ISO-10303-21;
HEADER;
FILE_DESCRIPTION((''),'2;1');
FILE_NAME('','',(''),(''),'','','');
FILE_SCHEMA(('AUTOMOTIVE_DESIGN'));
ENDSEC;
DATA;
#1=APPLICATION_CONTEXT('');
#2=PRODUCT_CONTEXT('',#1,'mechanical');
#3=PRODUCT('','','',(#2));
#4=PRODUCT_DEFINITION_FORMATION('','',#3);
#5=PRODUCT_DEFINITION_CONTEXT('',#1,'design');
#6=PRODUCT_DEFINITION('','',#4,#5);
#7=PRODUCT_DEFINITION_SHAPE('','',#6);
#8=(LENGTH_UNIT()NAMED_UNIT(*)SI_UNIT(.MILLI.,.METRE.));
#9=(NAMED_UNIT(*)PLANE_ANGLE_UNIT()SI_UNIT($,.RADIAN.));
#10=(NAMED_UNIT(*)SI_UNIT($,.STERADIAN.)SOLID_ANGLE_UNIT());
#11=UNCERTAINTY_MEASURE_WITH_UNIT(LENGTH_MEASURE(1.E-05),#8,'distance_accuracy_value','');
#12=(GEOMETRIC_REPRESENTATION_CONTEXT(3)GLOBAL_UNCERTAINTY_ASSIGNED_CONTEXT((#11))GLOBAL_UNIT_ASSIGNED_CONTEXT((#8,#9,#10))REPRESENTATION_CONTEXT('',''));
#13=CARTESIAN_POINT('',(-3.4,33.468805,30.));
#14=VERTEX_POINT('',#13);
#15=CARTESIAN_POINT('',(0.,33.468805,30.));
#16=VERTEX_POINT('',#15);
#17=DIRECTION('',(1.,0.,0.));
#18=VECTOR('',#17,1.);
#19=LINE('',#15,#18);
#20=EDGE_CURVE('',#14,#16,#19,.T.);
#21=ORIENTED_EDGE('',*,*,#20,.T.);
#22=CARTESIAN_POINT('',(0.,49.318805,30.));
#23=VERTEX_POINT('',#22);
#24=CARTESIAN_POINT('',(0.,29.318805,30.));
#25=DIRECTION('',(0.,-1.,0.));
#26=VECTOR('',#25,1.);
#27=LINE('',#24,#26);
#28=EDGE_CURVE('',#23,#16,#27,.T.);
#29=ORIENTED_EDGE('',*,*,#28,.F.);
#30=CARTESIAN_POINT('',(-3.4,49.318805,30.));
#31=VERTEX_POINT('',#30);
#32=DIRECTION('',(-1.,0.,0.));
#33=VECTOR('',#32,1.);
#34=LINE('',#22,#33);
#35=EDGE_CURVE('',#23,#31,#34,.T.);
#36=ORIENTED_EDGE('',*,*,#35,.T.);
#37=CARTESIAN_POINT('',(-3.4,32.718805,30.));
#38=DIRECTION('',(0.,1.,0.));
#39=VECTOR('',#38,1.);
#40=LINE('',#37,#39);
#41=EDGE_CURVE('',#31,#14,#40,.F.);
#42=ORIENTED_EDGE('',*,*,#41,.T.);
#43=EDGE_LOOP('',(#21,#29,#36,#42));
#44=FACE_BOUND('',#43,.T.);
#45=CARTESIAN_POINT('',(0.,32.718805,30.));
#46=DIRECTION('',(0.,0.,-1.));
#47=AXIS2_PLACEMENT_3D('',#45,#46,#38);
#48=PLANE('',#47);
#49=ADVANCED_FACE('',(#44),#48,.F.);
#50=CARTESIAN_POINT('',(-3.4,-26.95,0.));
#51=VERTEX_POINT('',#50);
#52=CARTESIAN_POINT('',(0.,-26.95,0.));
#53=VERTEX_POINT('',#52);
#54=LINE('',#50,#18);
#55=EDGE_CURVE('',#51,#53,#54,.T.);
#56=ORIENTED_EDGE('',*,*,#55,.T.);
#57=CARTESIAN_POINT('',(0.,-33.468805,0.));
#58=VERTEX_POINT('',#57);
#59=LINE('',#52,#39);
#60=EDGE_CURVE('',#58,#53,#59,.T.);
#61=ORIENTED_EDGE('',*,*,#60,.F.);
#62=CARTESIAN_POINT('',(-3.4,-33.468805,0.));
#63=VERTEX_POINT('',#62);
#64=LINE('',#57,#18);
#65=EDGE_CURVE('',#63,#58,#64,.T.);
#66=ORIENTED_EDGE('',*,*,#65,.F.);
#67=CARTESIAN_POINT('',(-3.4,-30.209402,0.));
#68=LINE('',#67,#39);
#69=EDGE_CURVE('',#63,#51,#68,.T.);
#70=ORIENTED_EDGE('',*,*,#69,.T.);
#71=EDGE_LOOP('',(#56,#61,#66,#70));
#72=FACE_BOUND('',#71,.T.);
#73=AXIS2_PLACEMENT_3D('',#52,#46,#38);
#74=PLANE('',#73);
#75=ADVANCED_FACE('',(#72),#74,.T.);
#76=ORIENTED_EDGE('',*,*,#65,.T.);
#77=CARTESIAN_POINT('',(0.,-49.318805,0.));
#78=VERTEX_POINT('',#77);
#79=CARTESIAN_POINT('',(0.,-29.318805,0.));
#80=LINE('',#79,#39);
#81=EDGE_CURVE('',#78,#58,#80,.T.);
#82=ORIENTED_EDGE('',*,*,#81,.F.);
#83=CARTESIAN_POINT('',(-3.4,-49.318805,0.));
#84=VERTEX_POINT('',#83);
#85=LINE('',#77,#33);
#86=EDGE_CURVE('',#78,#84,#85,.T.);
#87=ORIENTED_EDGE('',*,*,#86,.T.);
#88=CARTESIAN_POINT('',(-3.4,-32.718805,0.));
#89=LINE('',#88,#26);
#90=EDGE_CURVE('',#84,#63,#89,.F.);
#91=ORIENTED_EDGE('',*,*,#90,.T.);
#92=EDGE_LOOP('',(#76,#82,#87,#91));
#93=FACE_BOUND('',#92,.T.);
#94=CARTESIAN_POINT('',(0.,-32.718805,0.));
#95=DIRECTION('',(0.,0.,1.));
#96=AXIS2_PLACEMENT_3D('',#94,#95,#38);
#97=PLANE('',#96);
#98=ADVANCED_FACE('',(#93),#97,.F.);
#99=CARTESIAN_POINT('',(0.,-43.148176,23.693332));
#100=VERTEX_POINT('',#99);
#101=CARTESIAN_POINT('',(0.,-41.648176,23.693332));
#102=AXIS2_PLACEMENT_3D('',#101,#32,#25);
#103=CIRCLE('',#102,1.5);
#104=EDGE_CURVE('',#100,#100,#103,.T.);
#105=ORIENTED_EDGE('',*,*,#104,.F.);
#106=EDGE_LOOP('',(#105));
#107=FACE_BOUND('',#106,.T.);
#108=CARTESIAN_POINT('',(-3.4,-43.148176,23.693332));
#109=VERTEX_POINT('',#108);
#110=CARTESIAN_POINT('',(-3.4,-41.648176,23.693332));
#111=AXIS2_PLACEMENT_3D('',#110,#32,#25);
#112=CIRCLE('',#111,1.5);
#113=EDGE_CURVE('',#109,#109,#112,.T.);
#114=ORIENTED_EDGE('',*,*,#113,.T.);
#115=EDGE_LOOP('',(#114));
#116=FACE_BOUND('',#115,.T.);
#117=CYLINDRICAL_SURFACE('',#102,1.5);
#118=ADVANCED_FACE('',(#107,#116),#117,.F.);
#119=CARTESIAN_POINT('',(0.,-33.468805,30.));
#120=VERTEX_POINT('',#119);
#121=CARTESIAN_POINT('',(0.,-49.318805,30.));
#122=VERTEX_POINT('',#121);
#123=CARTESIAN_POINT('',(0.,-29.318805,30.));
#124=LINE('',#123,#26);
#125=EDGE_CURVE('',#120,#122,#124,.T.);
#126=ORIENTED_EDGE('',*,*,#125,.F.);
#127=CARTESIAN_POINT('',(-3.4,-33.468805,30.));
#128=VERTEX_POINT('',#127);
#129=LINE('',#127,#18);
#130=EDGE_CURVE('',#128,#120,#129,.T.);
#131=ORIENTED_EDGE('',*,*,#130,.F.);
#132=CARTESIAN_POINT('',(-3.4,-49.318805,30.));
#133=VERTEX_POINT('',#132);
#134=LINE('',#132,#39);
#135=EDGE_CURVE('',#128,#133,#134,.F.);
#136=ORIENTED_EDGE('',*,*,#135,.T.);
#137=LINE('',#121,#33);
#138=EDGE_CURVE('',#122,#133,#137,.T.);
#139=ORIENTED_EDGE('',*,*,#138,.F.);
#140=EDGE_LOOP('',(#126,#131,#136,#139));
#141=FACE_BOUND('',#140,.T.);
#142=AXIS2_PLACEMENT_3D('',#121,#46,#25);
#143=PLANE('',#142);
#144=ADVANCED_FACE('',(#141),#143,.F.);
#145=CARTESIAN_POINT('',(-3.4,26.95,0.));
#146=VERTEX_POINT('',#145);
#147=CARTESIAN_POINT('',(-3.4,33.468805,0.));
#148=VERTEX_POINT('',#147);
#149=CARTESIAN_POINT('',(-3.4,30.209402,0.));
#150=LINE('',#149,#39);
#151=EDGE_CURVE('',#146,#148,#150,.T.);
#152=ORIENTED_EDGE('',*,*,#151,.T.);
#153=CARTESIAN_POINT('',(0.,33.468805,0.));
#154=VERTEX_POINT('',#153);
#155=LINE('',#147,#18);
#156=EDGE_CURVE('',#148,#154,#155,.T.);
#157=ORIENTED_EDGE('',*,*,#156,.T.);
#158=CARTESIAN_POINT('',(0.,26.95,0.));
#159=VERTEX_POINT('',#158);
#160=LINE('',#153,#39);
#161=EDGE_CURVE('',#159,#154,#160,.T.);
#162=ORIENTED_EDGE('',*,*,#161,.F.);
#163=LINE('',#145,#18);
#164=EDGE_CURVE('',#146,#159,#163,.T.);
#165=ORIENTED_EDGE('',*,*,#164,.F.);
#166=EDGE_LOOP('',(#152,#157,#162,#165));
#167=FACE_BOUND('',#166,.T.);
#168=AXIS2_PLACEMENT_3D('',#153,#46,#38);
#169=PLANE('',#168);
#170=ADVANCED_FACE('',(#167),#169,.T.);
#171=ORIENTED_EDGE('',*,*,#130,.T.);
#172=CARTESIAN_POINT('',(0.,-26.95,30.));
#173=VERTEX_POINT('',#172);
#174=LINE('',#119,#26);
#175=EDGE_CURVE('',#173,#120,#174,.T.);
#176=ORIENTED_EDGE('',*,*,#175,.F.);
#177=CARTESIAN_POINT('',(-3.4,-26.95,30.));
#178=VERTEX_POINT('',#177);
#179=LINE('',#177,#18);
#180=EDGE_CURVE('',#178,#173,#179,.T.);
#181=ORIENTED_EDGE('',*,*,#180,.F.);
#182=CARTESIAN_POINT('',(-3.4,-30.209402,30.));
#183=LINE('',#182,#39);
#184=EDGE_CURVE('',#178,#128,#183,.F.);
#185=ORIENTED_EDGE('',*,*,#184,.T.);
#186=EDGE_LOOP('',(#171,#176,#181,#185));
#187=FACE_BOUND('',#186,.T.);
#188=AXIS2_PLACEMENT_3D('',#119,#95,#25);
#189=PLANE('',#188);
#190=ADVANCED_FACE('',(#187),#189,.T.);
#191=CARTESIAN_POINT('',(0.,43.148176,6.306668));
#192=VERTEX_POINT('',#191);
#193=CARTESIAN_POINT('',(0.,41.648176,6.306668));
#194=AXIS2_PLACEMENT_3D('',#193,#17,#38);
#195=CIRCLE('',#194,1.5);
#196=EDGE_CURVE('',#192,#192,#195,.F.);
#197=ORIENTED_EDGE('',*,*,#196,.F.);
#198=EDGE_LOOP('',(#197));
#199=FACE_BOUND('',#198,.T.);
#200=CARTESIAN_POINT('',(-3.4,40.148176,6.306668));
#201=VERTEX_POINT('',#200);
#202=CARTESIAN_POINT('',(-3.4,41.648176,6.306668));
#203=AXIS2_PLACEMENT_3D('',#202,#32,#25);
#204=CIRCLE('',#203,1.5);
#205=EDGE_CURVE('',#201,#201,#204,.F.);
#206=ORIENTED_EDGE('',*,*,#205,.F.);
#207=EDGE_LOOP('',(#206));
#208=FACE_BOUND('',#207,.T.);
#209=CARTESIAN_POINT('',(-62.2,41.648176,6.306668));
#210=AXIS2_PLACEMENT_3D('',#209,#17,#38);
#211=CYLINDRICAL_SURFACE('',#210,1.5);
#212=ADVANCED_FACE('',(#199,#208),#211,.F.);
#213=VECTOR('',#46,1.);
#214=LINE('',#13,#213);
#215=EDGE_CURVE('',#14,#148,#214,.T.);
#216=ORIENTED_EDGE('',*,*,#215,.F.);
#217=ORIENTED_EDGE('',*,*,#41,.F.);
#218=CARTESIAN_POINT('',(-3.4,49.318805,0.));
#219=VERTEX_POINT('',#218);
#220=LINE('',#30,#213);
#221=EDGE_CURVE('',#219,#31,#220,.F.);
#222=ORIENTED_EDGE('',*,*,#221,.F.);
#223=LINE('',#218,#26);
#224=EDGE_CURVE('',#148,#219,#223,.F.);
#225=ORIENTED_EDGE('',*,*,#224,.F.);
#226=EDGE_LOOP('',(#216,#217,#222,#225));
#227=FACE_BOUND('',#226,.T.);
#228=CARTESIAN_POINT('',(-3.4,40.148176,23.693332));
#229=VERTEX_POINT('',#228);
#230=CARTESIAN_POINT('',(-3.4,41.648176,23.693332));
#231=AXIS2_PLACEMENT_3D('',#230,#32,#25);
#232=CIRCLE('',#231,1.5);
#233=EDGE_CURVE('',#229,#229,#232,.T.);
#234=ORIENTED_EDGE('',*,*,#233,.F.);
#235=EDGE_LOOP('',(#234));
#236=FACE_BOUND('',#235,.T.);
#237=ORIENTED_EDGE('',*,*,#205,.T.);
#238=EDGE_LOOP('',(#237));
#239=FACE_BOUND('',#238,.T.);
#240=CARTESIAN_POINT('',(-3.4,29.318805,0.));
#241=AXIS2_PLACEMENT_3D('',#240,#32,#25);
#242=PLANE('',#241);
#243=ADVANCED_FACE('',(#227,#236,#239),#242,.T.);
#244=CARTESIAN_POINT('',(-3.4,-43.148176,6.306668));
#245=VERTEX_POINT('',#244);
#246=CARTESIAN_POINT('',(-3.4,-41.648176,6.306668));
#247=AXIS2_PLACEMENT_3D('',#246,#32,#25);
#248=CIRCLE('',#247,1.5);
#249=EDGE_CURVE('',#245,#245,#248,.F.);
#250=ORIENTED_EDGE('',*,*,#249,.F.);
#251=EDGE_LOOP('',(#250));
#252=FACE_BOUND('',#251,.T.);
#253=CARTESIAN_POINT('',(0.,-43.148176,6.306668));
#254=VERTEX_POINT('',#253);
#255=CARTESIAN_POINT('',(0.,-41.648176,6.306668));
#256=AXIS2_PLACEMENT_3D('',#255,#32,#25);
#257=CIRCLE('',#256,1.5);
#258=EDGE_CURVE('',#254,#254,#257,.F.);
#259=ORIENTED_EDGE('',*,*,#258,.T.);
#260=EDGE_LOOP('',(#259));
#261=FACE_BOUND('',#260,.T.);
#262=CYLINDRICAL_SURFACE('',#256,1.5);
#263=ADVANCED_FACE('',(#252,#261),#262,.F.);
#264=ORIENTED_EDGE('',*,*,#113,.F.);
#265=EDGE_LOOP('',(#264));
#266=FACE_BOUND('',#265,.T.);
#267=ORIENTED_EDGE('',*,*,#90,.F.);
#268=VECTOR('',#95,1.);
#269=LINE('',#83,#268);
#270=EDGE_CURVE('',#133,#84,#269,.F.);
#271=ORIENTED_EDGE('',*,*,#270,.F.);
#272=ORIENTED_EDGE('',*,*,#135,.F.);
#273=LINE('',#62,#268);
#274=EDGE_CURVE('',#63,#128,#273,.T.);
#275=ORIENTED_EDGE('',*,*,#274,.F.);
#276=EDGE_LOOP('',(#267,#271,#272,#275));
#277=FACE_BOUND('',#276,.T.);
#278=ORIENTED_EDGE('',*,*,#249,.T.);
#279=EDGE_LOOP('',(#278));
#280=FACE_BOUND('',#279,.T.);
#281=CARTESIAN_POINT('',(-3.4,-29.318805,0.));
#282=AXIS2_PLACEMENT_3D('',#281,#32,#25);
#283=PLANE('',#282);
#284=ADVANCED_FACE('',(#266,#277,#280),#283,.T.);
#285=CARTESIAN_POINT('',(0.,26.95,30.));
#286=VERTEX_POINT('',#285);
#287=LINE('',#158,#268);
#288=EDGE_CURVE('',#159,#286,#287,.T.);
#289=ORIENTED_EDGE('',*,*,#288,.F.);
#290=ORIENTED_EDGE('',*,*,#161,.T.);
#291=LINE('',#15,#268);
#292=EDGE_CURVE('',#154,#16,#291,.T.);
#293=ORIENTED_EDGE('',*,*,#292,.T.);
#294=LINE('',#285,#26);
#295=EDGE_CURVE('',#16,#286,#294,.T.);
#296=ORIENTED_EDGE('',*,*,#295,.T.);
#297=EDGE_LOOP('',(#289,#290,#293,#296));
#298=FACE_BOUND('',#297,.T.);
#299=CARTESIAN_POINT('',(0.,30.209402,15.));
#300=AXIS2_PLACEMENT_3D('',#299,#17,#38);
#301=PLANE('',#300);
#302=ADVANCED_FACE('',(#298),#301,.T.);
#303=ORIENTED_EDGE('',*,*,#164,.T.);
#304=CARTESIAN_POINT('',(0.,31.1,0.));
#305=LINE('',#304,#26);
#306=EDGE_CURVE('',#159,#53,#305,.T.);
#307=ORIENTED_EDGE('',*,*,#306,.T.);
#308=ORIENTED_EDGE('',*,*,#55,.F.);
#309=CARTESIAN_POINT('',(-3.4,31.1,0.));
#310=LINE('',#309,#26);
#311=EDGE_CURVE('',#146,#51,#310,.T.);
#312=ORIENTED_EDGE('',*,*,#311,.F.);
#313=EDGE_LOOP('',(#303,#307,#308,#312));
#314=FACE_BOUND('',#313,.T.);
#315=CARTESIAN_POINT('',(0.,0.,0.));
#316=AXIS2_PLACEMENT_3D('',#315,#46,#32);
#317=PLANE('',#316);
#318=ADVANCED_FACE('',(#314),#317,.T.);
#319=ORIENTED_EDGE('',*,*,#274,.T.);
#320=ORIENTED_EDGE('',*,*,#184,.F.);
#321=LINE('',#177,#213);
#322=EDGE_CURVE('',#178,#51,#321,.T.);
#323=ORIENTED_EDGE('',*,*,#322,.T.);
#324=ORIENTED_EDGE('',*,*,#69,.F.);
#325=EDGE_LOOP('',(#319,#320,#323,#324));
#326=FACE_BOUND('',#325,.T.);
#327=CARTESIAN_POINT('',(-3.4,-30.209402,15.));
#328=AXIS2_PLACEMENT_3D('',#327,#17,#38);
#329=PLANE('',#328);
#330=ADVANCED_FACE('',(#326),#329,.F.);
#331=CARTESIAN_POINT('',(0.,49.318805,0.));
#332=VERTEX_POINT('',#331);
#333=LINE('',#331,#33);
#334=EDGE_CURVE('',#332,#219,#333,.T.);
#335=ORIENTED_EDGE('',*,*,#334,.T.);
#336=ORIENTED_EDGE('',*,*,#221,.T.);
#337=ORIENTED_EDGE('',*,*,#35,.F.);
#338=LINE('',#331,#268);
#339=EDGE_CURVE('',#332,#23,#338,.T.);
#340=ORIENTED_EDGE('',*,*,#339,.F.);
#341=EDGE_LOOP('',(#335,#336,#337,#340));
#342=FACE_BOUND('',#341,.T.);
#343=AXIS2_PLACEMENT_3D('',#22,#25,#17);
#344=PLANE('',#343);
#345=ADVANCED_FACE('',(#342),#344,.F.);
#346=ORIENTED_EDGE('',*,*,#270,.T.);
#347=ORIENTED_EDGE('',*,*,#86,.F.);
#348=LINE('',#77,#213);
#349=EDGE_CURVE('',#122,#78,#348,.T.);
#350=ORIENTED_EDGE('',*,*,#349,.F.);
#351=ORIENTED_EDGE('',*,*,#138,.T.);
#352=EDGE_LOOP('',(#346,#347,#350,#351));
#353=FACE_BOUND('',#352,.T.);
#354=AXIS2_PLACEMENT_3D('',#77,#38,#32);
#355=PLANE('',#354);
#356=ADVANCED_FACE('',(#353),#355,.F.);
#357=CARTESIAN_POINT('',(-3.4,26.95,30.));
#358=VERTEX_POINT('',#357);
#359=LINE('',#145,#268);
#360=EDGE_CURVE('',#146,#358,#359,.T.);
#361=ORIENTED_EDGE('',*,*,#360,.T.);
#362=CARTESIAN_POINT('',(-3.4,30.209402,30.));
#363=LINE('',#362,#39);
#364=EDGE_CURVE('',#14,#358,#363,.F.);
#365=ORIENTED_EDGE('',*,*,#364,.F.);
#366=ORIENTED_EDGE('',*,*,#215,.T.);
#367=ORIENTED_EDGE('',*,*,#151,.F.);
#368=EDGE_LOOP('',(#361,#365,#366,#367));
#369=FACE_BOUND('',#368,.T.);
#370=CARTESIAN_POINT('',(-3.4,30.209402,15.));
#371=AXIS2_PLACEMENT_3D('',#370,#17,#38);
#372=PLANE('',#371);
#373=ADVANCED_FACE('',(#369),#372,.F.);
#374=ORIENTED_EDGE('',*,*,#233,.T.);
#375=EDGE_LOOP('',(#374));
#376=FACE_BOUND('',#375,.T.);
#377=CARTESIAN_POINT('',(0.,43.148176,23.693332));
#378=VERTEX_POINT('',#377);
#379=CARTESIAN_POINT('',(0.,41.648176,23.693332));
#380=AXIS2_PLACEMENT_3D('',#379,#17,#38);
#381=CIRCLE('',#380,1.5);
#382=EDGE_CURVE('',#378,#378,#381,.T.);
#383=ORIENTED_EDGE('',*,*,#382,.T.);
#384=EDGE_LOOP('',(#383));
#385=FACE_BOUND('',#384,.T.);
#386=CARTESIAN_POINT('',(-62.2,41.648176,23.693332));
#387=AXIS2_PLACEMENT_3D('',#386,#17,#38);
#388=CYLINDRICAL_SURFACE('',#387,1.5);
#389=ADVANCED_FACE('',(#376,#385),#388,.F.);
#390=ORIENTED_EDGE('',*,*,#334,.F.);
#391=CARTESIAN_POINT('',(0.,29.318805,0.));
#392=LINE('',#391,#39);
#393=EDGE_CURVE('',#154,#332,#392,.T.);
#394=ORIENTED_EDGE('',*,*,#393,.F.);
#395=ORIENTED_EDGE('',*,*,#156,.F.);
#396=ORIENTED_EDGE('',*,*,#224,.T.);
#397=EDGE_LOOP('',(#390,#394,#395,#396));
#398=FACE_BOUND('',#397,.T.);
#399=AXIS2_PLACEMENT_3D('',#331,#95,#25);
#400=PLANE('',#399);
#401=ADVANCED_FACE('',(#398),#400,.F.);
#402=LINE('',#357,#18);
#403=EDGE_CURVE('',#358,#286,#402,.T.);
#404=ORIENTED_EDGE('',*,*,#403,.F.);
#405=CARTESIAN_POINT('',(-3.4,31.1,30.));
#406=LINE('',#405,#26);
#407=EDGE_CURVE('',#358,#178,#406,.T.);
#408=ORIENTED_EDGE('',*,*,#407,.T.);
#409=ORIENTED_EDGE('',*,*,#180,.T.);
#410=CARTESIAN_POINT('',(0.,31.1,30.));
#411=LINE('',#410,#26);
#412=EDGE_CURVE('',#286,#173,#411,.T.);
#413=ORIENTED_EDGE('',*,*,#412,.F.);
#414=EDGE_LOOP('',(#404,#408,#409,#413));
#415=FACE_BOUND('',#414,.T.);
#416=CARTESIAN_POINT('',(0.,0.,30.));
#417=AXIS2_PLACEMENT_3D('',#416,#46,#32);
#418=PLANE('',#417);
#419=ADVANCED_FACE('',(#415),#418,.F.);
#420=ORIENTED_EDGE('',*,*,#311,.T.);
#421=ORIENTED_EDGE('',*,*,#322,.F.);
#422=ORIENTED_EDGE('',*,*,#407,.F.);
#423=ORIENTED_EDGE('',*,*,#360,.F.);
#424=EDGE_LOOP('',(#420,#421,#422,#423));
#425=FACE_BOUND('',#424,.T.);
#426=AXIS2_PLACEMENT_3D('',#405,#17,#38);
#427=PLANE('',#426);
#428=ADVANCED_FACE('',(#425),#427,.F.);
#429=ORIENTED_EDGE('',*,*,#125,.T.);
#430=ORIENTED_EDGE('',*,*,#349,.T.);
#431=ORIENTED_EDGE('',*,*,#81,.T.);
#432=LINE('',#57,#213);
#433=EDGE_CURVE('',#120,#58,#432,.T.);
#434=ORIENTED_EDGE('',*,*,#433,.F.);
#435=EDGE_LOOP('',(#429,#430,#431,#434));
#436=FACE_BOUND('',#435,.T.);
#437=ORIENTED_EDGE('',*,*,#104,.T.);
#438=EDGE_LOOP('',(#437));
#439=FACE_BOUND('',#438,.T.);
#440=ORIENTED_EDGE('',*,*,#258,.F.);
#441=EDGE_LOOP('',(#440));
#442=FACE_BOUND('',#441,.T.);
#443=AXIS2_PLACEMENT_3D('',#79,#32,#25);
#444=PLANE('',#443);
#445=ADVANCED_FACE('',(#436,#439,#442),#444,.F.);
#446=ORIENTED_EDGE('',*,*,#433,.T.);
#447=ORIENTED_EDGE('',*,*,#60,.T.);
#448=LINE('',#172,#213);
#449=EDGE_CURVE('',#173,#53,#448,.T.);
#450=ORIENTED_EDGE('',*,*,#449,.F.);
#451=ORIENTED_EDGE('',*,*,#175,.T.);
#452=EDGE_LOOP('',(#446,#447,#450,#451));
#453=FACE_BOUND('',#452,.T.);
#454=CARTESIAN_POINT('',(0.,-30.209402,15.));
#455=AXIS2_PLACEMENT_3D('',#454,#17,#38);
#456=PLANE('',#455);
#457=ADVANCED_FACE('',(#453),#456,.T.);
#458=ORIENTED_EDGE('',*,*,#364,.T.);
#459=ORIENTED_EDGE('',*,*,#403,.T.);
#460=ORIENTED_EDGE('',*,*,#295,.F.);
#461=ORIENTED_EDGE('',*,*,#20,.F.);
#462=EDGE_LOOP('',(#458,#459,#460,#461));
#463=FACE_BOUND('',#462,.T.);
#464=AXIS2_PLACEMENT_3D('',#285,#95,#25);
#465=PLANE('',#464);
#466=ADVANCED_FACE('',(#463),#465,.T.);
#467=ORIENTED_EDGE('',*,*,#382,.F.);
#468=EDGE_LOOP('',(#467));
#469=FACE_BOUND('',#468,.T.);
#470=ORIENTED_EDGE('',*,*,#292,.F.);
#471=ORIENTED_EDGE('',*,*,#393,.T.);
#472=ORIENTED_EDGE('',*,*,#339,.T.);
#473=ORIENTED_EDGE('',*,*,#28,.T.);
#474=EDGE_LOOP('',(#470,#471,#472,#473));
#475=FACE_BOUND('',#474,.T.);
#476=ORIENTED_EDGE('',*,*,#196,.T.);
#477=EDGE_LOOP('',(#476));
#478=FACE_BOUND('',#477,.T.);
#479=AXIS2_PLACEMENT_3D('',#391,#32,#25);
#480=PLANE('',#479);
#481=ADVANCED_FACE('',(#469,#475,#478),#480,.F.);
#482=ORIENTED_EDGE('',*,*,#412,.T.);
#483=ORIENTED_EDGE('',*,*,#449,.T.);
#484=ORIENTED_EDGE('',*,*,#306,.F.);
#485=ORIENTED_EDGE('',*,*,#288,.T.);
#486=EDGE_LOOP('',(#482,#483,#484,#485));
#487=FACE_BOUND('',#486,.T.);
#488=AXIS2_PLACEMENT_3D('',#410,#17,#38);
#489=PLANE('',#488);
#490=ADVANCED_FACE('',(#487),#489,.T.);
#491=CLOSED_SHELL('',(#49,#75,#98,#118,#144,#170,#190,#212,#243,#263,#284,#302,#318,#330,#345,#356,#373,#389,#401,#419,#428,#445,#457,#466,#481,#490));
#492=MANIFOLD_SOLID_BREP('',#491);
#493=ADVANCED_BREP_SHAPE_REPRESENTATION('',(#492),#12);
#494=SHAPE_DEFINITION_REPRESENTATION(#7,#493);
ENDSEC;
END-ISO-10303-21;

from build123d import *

# Parameters (mm, degrees)
SKETCH11_W                     = 3.4
SKETCH11_H                     = 62.2
BASE_FLANGE3_DEPTH             = 30
EDGE_FLANGE1_STRIP_W           = 15.1
EDGE_FLANGE1_STRIP_H           = 3.4
EDGE_FLANGE1_STRIP_CUT_DEPTH   = 30
EDGE_FLANGE1_STRIP_2_W         = 15.1
EDGE_FLANGE1_STRIP_2_H         = 3.4
EDGE_FLANGE1_STRIP_CUT_2_DEPTH = 30
EDGE_FLANGE1_DEPTH             = 30
EDGE_FLANGE1_BEND_DEPTH        = 30
SKETCH22_R                     = 1.5
CUT_EXTRUDE1_DEPTH             = 72.894645141
UNFOLD1_START                  = -20
UNFOLD1_OUTLINE_W              = 62.2
UNFOLD1_OUTLINE_H              = 30
UNFOLD1_DEPTH                  = 16.6
UNFOLD1_START_2                = -3.4
UNFOLD1_2_OUTLINE_W            = 98.637609512
UNFOLD1_2_OUTLINE_H            = 30
UNFOLD1_2_OUTLINE_R            = 1.5
UNFOLD1_2_DEPTH                = 3.4


# Read off the part's stored shape, not the designer's step: Unfold1
# Sheet-metal steps are written as plain solids
with BuildPart() as part:
    # Sketch11 → Base-Flange3 (new body)
    with BuildSketch(Plane.XY):
        with Locations((-1.7, 0)):
            Rectangle(SKETCH11_W, SKETCH11_H)
    extrude(amount=BASE_FLANGE3_DEPTH)

    # Edge-Flange1 strip (across the edge) → Edge-Flange1 strip cut (cut)
    with BuildSketch(Plane(origin=(-3.4, 31.1, 30), x_dir=(0, -1, 0), z_dir=(0, 0, -1))):
        with Locations((-3.4, -1.7)):
            Rectangle(EDGE_FLANGE1_STRIP_W, EDGE_FLANGE1_STRIP_H)
    extrude(amount=EDGE_FLANGE1_STRIP_CUT_DEPTH, mode=Mode.SUBTRACT)

    # Edge-Flange1 strip 2 (across the edge) → Edge-Flange1 strip cut 2 (cut)
    with BuildSketch(Plane(origin=(-3.4, -31.1, 0), x_dir=(0, 1, 0), z_dir=(0, 0, 1))):
        with Locations((-3.4, -1.7)):
            Rectangle(EDGE_FLANGE1_STRIP_2_W, EDGE_FLANGE1_STRIP_2_H)
    extrude(amount=EDGE_FLANGE1_STRIP_CUT_2_DEPTH, mode=Mode.SUBTRACT)

    # Edge-Flange1 section (across the edge) → Edge-Flange1 (add)
    with BuildSketch(Plane(origin=(-3.4, 31.1, 30), x_dir=(0, -1, 0), z_dir=(0, 0, -1))):
        with BuildLine():
            Line((0, 0.75), (0, 16.6))
            Line((0, 16.6), (3.4, 16.6))
            Line((3.4, 16.6), (3.4, 0.75))
            ThreePointArc((3.4, 0.75), (3.619669914, 0.219669914), (4.15, 0))
            Line((4.15, 0), (4.15, -3.4))
            ThreePointArc((4.15, -3.4), (1.215506858, -2.184493142), (0, 0.75))
        make_face()
    extrude(amount=EDGE_FLANGE1_DEPTH)

    # Edge-Flange1 section 2 (across the edge) → Edge-Flange1 bend (add)
    with BuildSketch(Plane(origin=(-3.4, -31.1, 0), x_dir=(0, 1, 0), z_dir=(0, 0, 1))):
        with BuildLine():
            Line((0, 0.75), (0, 16.6))
            Line((0, 16.6), (3.4, 16.6))
            Line((3.4, 16.6), (3.4, 0.75))
            ThreePointArc((3.4, 0.75), (3.619669914, 0.219669914), (4.15, 0))
            Line((4.15, 0), (4.15, -3.4))
            ThreePointArc((4.15, -3.4), (1.215506858, -2.184493142), (0, 0.75))
        make_face()
    extrude(amount=EDGE_FLANGE1_BEND_DEPTH)

    # Sketch22 → Cut-Extrude1 (cut, through all)
    with BuildSketch(Plane(origin=(0, 31.1, 0), x_dir=(1, 0, 0), z_dir=(0, 1, 0))):
        with Locations(Location((-12.329371406, -23.693332437, 0), (0, 0, 180))):
            Circle(SKETCH22_R)
        with Locations(Location((-12.329371406, -6.306667563, 0), (0, 0, 180))):
            Circle(SKETCH22_R)
    extrude(amount=-CUT_EXTRUDE1_DEPTH, mode=Mode.SUBTRACT)

    # Unfold1 outline → Unfold1 (cut)
    with BuildSketch(Plane.YZ.offset(UNFOLD1_START)):
        with Locations((0, 15)):
            Rectangle(UNFOLD1_OUTLINE_W, UNFOLD1_OUTLINE_H)
    extrude(amount=UNFOLD1_DEPTH, mode=Mode.SUBTRACT)

    # Unfold1 2 outline → Unfold1 2 (add)
    with BuildSketch(Plane.YZ.offset(UNFOLD1_START_2)):
        with Locations((0, 15)):
            Rectangle(UNFOLD1_2_OUTLINE_W, UNFOLD1_2_OUTLINE_H)
        with Locations((41.648176162, 23.693332437)):
            Circle(UNFOLD1_2_OUTLINE_R, mode=Mode.SUBTRACT)
        with Locations((41.648176162, 6.306667563)):
            Circle(UNFOLD1_2_OUTLINE_R, mode=Mode.SUBTRACT)
        with Locations((-41.648176162, 23.693332437)):
            Circle(UNFOLD1_2_OUTLINE_R, mode=Mode.SUBTRACT)
        with Locations((-41.648176162, 6.306667563)):
            Circle(UNFOLD1_2_OUTLINE_R, mode=Mode.SUBTRACT)
    extrude(amount=UNFOLD1_2_DEPTH)


solid = part.part
